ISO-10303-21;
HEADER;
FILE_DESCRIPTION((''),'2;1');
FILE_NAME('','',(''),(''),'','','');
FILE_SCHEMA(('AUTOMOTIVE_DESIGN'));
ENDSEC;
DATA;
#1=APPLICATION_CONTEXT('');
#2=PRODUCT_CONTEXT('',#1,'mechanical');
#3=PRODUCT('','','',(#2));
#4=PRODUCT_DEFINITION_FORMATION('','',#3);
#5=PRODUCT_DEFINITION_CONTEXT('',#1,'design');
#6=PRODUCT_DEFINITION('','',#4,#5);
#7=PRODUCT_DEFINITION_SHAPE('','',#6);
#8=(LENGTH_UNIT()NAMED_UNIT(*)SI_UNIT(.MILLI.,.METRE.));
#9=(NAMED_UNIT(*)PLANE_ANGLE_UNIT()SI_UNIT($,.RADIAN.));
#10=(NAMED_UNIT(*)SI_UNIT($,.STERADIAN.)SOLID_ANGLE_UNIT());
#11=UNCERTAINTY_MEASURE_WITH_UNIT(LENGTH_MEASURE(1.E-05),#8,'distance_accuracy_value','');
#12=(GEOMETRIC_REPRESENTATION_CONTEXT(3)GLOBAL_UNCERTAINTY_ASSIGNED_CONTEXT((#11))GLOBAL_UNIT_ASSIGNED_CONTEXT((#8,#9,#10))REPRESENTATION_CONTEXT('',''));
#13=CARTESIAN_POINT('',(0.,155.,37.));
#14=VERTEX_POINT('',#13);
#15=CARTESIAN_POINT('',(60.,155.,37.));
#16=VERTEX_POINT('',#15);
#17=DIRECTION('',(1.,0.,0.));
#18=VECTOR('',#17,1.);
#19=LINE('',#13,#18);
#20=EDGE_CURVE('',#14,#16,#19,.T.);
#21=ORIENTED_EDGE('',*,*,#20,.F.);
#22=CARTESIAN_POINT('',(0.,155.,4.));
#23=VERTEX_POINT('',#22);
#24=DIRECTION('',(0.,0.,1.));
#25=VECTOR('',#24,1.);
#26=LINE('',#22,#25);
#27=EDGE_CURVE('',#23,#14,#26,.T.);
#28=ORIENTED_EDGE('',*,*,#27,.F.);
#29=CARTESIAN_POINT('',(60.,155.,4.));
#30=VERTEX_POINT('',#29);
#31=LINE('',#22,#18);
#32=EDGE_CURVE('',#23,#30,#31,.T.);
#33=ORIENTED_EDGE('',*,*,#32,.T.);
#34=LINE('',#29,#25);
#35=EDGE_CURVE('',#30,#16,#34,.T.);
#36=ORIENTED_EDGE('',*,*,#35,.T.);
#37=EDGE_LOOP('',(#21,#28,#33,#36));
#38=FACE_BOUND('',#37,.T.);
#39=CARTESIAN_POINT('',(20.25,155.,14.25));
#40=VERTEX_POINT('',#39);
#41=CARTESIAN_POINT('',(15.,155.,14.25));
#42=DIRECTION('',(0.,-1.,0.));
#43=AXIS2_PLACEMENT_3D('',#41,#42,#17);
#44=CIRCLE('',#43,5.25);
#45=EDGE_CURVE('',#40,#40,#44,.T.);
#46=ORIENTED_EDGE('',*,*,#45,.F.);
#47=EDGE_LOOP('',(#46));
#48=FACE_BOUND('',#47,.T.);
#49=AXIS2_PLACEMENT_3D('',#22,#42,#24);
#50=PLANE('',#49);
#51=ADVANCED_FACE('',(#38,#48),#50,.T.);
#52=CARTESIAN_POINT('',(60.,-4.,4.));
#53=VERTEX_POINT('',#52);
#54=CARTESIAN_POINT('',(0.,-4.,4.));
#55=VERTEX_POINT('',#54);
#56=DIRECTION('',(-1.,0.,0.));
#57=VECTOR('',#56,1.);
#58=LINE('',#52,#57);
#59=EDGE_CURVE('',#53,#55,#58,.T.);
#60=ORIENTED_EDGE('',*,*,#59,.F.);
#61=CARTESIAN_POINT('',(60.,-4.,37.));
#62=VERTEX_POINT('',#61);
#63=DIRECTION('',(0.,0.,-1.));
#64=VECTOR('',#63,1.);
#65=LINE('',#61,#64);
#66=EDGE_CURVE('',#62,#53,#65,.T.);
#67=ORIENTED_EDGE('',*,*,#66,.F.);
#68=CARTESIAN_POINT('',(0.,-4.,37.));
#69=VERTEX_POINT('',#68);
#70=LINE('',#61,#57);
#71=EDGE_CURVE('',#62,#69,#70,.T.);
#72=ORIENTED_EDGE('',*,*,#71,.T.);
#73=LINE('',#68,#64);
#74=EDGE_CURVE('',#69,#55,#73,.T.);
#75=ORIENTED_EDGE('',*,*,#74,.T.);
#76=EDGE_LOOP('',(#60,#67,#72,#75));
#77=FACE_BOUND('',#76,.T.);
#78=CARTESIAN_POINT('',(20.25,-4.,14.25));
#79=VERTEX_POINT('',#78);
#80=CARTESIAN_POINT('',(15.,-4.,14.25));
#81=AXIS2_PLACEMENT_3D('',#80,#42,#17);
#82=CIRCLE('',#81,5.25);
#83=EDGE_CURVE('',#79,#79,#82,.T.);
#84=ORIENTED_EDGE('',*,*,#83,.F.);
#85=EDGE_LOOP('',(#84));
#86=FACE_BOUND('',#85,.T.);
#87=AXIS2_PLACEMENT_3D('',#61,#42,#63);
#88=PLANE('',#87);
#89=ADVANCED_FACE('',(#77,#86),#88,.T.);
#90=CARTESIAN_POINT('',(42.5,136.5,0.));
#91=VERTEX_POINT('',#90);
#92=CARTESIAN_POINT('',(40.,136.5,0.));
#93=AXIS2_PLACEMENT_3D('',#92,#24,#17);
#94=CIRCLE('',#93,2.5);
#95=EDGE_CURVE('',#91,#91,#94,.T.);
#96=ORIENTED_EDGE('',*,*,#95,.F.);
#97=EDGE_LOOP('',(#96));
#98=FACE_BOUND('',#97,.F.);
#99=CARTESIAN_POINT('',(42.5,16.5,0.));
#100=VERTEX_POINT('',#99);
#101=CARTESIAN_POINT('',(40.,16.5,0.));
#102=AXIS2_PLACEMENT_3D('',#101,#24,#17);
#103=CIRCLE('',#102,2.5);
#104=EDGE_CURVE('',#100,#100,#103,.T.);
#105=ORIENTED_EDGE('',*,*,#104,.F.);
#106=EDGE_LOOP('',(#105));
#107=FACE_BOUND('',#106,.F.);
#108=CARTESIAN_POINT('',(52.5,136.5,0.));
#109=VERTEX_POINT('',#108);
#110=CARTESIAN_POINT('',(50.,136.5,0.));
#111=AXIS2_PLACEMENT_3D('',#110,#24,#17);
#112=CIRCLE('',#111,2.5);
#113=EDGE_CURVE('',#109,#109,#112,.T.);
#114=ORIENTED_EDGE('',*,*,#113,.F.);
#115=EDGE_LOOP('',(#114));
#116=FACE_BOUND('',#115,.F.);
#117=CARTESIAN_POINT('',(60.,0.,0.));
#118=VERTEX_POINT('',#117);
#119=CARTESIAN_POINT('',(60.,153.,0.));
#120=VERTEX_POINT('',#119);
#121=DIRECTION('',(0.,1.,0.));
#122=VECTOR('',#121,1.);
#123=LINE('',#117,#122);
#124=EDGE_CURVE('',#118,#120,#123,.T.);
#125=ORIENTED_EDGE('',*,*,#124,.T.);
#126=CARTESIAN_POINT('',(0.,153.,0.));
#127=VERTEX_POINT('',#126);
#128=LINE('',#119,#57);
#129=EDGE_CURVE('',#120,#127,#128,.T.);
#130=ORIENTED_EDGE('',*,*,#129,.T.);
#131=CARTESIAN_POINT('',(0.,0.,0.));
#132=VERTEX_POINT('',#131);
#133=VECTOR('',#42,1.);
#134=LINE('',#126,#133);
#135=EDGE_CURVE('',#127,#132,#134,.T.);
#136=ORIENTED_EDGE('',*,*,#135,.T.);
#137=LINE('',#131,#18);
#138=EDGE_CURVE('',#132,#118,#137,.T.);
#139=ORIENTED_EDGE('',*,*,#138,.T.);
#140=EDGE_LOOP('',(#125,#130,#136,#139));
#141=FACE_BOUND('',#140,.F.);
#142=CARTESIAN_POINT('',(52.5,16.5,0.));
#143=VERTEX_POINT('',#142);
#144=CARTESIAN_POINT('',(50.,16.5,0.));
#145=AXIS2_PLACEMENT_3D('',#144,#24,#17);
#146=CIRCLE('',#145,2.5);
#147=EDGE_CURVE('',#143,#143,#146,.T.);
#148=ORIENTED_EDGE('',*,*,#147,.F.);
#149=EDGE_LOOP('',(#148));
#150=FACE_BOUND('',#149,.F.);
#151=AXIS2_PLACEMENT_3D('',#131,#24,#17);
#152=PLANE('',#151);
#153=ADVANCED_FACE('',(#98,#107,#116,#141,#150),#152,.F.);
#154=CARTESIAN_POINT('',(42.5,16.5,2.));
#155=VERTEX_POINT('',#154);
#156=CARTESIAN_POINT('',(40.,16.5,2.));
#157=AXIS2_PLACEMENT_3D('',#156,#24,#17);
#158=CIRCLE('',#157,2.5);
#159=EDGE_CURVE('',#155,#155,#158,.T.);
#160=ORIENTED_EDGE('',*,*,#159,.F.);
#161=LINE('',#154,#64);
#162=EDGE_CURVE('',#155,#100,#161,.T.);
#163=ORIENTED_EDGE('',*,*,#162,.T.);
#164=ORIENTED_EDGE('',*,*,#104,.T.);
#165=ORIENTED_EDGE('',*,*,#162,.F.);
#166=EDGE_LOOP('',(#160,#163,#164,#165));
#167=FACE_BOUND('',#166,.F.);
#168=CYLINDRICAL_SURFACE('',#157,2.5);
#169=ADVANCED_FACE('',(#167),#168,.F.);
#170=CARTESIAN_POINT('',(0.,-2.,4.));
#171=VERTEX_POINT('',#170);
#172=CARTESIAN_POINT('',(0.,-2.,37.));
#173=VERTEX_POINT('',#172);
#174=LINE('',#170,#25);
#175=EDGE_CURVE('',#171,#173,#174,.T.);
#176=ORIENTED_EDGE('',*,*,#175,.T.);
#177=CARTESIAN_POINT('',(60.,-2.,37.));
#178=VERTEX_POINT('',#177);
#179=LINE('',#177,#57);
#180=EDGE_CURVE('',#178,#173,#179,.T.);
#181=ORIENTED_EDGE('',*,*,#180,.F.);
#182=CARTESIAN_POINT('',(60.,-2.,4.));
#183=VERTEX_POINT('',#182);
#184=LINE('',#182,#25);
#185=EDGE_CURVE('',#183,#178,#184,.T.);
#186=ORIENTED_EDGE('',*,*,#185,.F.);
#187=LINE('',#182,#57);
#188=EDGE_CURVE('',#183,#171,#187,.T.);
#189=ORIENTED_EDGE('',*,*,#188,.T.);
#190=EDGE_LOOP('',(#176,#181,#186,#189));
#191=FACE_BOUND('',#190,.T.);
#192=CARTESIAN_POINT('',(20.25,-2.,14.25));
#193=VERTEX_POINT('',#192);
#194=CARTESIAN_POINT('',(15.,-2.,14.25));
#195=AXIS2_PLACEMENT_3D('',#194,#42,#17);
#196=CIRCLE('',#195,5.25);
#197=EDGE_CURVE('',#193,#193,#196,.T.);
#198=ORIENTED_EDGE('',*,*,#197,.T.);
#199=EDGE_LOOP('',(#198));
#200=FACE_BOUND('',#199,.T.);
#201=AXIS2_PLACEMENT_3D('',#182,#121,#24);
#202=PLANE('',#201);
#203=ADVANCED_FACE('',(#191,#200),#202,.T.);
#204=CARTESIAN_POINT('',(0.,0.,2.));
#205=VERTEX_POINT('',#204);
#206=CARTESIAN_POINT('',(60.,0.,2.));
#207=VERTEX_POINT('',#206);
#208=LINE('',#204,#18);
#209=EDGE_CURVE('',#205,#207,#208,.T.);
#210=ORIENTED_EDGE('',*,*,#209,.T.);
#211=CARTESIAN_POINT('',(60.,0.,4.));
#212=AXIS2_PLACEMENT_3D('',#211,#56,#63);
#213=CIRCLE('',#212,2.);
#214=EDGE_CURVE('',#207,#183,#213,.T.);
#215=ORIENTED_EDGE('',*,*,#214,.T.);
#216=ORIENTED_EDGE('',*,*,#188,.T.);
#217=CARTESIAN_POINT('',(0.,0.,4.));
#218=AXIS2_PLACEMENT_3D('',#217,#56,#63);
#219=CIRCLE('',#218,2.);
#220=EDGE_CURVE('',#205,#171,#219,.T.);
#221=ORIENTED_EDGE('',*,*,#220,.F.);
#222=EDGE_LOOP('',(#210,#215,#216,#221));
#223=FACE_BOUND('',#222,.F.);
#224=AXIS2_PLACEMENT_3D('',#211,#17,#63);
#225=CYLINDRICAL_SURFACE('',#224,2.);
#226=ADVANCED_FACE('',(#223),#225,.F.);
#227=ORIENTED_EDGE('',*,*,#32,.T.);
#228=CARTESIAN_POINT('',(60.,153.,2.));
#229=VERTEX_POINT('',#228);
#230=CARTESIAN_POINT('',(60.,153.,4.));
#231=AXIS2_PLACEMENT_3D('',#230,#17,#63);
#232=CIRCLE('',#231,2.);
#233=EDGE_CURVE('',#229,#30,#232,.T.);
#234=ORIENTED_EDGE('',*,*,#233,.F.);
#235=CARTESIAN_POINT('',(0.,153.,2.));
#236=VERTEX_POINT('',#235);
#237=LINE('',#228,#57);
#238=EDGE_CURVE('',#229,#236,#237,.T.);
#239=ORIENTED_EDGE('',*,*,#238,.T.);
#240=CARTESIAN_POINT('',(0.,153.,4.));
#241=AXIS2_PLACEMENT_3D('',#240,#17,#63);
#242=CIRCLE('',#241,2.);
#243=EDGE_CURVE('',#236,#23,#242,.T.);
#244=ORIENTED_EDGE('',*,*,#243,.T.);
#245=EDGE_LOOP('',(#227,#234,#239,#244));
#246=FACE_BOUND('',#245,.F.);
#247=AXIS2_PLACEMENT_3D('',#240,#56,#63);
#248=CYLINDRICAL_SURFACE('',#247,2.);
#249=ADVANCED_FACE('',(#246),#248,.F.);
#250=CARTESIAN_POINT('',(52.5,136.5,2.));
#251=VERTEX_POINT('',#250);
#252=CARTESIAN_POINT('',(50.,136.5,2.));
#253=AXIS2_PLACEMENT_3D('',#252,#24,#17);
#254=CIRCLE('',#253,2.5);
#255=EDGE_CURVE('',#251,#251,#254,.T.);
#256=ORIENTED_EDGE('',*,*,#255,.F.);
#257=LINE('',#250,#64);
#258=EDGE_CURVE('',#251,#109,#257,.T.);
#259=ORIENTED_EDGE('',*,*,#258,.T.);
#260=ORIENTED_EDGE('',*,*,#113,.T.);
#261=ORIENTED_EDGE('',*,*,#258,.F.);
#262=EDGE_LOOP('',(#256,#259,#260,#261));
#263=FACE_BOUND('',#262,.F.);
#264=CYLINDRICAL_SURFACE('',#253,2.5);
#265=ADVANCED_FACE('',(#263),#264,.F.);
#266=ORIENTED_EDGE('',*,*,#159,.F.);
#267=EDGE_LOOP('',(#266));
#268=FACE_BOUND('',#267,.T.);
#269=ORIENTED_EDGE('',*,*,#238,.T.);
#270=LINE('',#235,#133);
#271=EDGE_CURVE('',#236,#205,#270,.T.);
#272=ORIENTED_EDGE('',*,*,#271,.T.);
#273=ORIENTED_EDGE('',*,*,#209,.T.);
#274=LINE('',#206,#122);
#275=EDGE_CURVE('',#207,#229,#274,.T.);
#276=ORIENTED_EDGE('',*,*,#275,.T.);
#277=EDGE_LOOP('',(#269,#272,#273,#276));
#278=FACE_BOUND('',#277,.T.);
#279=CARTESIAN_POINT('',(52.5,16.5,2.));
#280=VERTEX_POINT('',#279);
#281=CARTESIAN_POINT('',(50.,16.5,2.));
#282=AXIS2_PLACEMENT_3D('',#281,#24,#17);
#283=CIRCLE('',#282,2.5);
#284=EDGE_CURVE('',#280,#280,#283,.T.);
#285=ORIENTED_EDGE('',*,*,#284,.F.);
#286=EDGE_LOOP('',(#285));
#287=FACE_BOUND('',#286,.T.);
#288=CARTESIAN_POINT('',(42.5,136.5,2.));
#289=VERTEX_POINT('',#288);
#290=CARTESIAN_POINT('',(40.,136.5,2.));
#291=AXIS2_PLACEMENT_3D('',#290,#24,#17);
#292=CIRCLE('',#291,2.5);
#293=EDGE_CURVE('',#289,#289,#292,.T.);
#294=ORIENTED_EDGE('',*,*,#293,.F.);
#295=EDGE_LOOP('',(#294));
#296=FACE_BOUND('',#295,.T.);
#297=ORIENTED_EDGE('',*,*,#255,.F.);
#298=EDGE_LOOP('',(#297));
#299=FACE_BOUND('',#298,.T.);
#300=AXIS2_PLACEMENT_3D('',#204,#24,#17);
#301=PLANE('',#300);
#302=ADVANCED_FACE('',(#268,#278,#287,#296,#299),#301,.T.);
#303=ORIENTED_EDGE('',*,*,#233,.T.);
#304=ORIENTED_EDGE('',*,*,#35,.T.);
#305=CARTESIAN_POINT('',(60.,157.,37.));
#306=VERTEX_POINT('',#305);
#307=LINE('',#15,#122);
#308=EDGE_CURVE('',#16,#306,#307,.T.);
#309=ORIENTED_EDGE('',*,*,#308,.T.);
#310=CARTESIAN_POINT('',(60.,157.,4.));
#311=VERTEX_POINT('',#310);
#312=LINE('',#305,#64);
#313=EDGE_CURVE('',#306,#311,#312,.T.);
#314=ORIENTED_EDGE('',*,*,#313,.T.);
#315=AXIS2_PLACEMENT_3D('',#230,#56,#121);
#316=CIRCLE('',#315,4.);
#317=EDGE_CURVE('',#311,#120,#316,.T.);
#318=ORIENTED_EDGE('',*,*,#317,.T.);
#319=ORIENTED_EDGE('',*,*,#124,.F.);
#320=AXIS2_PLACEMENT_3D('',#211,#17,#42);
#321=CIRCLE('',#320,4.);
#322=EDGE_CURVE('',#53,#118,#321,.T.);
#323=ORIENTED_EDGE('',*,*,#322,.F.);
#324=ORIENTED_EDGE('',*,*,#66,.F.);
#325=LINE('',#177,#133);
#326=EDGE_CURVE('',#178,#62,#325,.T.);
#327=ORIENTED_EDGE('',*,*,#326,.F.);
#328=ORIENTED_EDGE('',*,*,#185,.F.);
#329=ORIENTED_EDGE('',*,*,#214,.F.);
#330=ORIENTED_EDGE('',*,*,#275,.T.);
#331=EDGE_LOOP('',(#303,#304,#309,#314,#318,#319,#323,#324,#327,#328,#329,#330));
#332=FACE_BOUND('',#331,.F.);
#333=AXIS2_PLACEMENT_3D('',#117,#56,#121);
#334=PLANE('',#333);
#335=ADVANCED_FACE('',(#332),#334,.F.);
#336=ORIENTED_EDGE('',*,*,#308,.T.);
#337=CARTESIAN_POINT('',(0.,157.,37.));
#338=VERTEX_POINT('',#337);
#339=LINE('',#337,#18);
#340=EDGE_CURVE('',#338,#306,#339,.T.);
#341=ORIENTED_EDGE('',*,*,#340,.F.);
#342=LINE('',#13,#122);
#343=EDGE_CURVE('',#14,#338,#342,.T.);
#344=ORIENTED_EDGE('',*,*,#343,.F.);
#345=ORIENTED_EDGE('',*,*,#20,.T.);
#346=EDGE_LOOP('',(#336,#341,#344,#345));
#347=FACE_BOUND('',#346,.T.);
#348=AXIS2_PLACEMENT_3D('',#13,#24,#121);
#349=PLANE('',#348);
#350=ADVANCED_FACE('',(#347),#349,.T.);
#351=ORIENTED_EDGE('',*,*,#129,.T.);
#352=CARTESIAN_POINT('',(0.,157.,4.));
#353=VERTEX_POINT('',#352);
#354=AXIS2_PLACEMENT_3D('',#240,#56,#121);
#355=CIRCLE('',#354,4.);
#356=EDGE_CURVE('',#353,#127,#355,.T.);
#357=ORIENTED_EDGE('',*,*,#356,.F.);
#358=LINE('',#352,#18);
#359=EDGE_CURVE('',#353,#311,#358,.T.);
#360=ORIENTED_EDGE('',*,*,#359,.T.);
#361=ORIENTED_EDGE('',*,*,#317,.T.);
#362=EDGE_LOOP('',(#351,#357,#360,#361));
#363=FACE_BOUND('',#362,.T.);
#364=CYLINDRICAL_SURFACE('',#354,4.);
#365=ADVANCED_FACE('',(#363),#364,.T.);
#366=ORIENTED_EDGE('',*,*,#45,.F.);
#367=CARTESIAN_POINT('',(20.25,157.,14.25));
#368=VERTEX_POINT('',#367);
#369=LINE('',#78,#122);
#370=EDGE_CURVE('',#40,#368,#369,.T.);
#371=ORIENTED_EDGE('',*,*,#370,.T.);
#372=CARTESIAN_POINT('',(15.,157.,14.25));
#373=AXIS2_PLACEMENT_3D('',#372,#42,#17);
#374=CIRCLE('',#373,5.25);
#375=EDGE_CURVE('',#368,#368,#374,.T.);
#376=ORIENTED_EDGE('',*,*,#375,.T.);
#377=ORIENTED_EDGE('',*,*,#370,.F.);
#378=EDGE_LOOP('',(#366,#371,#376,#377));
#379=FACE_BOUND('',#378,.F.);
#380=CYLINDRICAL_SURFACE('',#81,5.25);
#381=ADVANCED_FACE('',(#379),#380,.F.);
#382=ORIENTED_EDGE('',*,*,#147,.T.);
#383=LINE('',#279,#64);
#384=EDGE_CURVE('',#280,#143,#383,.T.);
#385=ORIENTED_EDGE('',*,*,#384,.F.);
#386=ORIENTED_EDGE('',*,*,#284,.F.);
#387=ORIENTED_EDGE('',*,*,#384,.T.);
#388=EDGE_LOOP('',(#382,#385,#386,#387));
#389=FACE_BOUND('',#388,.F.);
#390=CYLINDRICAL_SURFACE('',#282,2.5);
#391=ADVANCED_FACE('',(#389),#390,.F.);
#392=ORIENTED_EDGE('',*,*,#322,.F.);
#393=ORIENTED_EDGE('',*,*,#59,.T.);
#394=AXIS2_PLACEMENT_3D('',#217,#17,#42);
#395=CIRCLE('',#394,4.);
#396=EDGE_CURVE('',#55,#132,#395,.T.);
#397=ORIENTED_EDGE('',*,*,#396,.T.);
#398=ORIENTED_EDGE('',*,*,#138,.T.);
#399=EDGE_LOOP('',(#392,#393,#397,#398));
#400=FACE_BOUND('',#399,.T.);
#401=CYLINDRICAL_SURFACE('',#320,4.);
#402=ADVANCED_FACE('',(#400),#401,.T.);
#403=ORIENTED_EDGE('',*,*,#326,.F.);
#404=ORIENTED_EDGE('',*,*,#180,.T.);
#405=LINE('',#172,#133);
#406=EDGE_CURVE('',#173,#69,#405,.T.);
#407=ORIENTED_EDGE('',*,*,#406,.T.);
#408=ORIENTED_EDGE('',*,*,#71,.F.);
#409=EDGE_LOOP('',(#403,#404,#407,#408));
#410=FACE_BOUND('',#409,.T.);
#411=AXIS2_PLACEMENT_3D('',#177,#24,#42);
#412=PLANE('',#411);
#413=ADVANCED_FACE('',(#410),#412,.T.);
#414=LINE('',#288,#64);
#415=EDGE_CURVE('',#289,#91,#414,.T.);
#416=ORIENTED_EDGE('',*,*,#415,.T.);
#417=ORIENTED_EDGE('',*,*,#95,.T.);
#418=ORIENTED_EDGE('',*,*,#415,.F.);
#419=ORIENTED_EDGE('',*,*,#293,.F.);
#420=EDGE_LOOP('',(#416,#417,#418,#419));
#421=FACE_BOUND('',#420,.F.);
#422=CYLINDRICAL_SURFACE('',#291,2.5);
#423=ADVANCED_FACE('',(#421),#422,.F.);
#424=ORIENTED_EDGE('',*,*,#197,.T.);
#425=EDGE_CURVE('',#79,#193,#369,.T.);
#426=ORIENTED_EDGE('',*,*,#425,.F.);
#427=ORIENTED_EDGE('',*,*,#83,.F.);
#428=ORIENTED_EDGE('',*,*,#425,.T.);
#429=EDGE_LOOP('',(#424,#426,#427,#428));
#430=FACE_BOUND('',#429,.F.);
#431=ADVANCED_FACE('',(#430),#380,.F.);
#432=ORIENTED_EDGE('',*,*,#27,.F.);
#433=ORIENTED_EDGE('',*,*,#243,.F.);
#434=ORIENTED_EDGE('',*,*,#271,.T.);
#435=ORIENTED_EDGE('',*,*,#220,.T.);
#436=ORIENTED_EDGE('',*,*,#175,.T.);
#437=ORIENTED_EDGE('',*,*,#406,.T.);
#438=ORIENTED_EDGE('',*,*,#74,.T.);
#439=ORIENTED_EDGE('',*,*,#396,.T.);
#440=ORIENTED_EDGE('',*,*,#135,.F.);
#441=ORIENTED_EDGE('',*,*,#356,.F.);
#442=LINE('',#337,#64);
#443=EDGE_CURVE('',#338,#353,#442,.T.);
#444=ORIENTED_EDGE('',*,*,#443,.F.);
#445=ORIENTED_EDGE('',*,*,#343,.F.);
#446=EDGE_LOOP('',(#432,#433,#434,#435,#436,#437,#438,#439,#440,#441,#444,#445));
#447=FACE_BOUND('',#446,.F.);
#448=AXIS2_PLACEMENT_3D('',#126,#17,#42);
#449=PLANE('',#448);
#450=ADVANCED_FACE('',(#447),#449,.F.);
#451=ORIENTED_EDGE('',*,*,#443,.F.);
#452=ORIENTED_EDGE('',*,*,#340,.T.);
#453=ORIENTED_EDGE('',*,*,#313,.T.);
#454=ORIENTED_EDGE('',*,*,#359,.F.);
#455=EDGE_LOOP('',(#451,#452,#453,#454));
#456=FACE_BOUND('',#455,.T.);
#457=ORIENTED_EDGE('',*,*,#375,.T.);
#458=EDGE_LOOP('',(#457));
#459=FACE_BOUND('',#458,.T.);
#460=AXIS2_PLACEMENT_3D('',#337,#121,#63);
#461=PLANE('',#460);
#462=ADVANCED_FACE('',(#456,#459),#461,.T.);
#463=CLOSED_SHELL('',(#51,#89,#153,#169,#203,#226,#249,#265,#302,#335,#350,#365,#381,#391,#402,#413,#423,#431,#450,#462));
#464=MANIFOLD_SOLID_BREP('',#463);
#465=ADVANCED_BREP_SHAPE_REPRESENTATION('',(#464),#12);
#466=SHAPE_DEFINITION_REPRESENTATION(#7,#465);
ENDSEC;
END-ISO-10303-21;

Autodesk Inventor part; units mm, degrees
ref_plane "YZ Plane" through (0, 0, 0) normal (1, 0, 0) x (0, 1, 0)
ref_plane "XZ Plane" through (0, 0, 0) normal (0, 1, 0) x (-1, 0, 0)
ref_plane "XY Plane" through (0, 0, 0) normal (0, 0, 1) x (1, 0, 0)
sketch "Sketch1" plane through (0, 0, 0) normal (0, 0, 1) x (1, 0, 0)
  line L0 (0, 0) -> (60, 0)
  line L1 (60, 0) -> (60, 153)
  line L2 (60, 153) -> (0, 153)
  line L3 (0, 153) -> (0, 0)
  dimension "d0" = 153
  dimension "d1" = 60
extrude "Plate1" add sketch "Sketch1" along normal blind 2
sketch "Sketch2" plane through (60, -2, 4) normal (0, -1, 0) x (1, 0, 0)
  line L0 (-60, 0) -> (0, 0)
  line L1 (0, 0) -> (0, 33)
  line L2 (0, 33) -> (-60, 33)
  line L3 (-60, 33) -> (-60, 0)
edge flange "Flange1" height 35 angle 90 thickness 2 bend radius 2 thickness toward (0, -1, 0) relief tear relief width 2 relief depth 1 corner gap 2 corner form 0 edges at (30, 0, 2) (30, 153, 2) wall of the first edge with corners at (0, -2, 4) (60, -2, 4) (60, -2, 37) (0, -2, 37)
bend "Bend1"
corner "Corner1"
sketch "Sketch3" plane through (0, -4, 37) normal (0, -1, 0) x (1, 0, 0)
  line L0 (0, -33) -> (60, -33) projected
  line L1 (0, -33) -> (0, 0) projected
  circle A0 centre (15, -22.75) radius 5.25
  point P0 (0, -37)
  dimension "d13" = 15
  dimension "d14" = 10.5
  dimension "d16" = 10.25
extrude "Extrusion1" cut sketch "Sketch3" against normal through all
sketch "Sketch4" plane through (0, 0, 2) normal (0, 0, 1) x (1, 0, 0)
  line L0 (0, 0) -> (0, 153) projected
  line L1 (60, 153) -> (60, 0) projected
  circle A0 centre (50, 136.5) radius 2.5
  circle A1 centre (40, 136.5) radius 2.5
  line L2 (60, 76.5) -> (0, 76.5) construction
  circle A2 centre (50, 16.5) radius 2.5
  circle A3 centre (40, 16.5) radius 2.5
  dimension "d20" = 10
  dimension "d21" = 20
  dimension "d22" = 5
  dimension "d23" = 5
  dimension "d24" = 120
extrude "Extrusion2" cut sketch "Sketch4" against normal through all
equation "\"d3\" = BendReliefWidth"
equation "\"d4\" = BendReliefDepth"
equation "\"d5\" = MinimumRemnant"
equation "\"d6\" = BendRadius"
equation "\"d9\" = BendRadius"
equation "\"d10\" = CornerReliefSize"
equation "\"d11\" = GapSize"
equation "\"d12\" = JacobiRadiusSize"
equation "\"BendRadius\" = Thickness"
equation "\"BendReliefWidth\" = Thickness"
equation "\"BendReliefDepth\" = 0.5 * Thickness"
equation "\"CornerReliefSize\" = 4 * Thickness"
equation "\"MinimumRemnant\" = 2 * Thickness"
equation "\"TransitionRadius\" = BendRadius"
equation "\"JacobiRadiusSize\" = BendRadius"
equation "\"GapSize\" = Thickness"
equation "\"d2\" = BendRadius"
equation "\"Thickness\" = 2"
properties part number "MotorPlatta"
